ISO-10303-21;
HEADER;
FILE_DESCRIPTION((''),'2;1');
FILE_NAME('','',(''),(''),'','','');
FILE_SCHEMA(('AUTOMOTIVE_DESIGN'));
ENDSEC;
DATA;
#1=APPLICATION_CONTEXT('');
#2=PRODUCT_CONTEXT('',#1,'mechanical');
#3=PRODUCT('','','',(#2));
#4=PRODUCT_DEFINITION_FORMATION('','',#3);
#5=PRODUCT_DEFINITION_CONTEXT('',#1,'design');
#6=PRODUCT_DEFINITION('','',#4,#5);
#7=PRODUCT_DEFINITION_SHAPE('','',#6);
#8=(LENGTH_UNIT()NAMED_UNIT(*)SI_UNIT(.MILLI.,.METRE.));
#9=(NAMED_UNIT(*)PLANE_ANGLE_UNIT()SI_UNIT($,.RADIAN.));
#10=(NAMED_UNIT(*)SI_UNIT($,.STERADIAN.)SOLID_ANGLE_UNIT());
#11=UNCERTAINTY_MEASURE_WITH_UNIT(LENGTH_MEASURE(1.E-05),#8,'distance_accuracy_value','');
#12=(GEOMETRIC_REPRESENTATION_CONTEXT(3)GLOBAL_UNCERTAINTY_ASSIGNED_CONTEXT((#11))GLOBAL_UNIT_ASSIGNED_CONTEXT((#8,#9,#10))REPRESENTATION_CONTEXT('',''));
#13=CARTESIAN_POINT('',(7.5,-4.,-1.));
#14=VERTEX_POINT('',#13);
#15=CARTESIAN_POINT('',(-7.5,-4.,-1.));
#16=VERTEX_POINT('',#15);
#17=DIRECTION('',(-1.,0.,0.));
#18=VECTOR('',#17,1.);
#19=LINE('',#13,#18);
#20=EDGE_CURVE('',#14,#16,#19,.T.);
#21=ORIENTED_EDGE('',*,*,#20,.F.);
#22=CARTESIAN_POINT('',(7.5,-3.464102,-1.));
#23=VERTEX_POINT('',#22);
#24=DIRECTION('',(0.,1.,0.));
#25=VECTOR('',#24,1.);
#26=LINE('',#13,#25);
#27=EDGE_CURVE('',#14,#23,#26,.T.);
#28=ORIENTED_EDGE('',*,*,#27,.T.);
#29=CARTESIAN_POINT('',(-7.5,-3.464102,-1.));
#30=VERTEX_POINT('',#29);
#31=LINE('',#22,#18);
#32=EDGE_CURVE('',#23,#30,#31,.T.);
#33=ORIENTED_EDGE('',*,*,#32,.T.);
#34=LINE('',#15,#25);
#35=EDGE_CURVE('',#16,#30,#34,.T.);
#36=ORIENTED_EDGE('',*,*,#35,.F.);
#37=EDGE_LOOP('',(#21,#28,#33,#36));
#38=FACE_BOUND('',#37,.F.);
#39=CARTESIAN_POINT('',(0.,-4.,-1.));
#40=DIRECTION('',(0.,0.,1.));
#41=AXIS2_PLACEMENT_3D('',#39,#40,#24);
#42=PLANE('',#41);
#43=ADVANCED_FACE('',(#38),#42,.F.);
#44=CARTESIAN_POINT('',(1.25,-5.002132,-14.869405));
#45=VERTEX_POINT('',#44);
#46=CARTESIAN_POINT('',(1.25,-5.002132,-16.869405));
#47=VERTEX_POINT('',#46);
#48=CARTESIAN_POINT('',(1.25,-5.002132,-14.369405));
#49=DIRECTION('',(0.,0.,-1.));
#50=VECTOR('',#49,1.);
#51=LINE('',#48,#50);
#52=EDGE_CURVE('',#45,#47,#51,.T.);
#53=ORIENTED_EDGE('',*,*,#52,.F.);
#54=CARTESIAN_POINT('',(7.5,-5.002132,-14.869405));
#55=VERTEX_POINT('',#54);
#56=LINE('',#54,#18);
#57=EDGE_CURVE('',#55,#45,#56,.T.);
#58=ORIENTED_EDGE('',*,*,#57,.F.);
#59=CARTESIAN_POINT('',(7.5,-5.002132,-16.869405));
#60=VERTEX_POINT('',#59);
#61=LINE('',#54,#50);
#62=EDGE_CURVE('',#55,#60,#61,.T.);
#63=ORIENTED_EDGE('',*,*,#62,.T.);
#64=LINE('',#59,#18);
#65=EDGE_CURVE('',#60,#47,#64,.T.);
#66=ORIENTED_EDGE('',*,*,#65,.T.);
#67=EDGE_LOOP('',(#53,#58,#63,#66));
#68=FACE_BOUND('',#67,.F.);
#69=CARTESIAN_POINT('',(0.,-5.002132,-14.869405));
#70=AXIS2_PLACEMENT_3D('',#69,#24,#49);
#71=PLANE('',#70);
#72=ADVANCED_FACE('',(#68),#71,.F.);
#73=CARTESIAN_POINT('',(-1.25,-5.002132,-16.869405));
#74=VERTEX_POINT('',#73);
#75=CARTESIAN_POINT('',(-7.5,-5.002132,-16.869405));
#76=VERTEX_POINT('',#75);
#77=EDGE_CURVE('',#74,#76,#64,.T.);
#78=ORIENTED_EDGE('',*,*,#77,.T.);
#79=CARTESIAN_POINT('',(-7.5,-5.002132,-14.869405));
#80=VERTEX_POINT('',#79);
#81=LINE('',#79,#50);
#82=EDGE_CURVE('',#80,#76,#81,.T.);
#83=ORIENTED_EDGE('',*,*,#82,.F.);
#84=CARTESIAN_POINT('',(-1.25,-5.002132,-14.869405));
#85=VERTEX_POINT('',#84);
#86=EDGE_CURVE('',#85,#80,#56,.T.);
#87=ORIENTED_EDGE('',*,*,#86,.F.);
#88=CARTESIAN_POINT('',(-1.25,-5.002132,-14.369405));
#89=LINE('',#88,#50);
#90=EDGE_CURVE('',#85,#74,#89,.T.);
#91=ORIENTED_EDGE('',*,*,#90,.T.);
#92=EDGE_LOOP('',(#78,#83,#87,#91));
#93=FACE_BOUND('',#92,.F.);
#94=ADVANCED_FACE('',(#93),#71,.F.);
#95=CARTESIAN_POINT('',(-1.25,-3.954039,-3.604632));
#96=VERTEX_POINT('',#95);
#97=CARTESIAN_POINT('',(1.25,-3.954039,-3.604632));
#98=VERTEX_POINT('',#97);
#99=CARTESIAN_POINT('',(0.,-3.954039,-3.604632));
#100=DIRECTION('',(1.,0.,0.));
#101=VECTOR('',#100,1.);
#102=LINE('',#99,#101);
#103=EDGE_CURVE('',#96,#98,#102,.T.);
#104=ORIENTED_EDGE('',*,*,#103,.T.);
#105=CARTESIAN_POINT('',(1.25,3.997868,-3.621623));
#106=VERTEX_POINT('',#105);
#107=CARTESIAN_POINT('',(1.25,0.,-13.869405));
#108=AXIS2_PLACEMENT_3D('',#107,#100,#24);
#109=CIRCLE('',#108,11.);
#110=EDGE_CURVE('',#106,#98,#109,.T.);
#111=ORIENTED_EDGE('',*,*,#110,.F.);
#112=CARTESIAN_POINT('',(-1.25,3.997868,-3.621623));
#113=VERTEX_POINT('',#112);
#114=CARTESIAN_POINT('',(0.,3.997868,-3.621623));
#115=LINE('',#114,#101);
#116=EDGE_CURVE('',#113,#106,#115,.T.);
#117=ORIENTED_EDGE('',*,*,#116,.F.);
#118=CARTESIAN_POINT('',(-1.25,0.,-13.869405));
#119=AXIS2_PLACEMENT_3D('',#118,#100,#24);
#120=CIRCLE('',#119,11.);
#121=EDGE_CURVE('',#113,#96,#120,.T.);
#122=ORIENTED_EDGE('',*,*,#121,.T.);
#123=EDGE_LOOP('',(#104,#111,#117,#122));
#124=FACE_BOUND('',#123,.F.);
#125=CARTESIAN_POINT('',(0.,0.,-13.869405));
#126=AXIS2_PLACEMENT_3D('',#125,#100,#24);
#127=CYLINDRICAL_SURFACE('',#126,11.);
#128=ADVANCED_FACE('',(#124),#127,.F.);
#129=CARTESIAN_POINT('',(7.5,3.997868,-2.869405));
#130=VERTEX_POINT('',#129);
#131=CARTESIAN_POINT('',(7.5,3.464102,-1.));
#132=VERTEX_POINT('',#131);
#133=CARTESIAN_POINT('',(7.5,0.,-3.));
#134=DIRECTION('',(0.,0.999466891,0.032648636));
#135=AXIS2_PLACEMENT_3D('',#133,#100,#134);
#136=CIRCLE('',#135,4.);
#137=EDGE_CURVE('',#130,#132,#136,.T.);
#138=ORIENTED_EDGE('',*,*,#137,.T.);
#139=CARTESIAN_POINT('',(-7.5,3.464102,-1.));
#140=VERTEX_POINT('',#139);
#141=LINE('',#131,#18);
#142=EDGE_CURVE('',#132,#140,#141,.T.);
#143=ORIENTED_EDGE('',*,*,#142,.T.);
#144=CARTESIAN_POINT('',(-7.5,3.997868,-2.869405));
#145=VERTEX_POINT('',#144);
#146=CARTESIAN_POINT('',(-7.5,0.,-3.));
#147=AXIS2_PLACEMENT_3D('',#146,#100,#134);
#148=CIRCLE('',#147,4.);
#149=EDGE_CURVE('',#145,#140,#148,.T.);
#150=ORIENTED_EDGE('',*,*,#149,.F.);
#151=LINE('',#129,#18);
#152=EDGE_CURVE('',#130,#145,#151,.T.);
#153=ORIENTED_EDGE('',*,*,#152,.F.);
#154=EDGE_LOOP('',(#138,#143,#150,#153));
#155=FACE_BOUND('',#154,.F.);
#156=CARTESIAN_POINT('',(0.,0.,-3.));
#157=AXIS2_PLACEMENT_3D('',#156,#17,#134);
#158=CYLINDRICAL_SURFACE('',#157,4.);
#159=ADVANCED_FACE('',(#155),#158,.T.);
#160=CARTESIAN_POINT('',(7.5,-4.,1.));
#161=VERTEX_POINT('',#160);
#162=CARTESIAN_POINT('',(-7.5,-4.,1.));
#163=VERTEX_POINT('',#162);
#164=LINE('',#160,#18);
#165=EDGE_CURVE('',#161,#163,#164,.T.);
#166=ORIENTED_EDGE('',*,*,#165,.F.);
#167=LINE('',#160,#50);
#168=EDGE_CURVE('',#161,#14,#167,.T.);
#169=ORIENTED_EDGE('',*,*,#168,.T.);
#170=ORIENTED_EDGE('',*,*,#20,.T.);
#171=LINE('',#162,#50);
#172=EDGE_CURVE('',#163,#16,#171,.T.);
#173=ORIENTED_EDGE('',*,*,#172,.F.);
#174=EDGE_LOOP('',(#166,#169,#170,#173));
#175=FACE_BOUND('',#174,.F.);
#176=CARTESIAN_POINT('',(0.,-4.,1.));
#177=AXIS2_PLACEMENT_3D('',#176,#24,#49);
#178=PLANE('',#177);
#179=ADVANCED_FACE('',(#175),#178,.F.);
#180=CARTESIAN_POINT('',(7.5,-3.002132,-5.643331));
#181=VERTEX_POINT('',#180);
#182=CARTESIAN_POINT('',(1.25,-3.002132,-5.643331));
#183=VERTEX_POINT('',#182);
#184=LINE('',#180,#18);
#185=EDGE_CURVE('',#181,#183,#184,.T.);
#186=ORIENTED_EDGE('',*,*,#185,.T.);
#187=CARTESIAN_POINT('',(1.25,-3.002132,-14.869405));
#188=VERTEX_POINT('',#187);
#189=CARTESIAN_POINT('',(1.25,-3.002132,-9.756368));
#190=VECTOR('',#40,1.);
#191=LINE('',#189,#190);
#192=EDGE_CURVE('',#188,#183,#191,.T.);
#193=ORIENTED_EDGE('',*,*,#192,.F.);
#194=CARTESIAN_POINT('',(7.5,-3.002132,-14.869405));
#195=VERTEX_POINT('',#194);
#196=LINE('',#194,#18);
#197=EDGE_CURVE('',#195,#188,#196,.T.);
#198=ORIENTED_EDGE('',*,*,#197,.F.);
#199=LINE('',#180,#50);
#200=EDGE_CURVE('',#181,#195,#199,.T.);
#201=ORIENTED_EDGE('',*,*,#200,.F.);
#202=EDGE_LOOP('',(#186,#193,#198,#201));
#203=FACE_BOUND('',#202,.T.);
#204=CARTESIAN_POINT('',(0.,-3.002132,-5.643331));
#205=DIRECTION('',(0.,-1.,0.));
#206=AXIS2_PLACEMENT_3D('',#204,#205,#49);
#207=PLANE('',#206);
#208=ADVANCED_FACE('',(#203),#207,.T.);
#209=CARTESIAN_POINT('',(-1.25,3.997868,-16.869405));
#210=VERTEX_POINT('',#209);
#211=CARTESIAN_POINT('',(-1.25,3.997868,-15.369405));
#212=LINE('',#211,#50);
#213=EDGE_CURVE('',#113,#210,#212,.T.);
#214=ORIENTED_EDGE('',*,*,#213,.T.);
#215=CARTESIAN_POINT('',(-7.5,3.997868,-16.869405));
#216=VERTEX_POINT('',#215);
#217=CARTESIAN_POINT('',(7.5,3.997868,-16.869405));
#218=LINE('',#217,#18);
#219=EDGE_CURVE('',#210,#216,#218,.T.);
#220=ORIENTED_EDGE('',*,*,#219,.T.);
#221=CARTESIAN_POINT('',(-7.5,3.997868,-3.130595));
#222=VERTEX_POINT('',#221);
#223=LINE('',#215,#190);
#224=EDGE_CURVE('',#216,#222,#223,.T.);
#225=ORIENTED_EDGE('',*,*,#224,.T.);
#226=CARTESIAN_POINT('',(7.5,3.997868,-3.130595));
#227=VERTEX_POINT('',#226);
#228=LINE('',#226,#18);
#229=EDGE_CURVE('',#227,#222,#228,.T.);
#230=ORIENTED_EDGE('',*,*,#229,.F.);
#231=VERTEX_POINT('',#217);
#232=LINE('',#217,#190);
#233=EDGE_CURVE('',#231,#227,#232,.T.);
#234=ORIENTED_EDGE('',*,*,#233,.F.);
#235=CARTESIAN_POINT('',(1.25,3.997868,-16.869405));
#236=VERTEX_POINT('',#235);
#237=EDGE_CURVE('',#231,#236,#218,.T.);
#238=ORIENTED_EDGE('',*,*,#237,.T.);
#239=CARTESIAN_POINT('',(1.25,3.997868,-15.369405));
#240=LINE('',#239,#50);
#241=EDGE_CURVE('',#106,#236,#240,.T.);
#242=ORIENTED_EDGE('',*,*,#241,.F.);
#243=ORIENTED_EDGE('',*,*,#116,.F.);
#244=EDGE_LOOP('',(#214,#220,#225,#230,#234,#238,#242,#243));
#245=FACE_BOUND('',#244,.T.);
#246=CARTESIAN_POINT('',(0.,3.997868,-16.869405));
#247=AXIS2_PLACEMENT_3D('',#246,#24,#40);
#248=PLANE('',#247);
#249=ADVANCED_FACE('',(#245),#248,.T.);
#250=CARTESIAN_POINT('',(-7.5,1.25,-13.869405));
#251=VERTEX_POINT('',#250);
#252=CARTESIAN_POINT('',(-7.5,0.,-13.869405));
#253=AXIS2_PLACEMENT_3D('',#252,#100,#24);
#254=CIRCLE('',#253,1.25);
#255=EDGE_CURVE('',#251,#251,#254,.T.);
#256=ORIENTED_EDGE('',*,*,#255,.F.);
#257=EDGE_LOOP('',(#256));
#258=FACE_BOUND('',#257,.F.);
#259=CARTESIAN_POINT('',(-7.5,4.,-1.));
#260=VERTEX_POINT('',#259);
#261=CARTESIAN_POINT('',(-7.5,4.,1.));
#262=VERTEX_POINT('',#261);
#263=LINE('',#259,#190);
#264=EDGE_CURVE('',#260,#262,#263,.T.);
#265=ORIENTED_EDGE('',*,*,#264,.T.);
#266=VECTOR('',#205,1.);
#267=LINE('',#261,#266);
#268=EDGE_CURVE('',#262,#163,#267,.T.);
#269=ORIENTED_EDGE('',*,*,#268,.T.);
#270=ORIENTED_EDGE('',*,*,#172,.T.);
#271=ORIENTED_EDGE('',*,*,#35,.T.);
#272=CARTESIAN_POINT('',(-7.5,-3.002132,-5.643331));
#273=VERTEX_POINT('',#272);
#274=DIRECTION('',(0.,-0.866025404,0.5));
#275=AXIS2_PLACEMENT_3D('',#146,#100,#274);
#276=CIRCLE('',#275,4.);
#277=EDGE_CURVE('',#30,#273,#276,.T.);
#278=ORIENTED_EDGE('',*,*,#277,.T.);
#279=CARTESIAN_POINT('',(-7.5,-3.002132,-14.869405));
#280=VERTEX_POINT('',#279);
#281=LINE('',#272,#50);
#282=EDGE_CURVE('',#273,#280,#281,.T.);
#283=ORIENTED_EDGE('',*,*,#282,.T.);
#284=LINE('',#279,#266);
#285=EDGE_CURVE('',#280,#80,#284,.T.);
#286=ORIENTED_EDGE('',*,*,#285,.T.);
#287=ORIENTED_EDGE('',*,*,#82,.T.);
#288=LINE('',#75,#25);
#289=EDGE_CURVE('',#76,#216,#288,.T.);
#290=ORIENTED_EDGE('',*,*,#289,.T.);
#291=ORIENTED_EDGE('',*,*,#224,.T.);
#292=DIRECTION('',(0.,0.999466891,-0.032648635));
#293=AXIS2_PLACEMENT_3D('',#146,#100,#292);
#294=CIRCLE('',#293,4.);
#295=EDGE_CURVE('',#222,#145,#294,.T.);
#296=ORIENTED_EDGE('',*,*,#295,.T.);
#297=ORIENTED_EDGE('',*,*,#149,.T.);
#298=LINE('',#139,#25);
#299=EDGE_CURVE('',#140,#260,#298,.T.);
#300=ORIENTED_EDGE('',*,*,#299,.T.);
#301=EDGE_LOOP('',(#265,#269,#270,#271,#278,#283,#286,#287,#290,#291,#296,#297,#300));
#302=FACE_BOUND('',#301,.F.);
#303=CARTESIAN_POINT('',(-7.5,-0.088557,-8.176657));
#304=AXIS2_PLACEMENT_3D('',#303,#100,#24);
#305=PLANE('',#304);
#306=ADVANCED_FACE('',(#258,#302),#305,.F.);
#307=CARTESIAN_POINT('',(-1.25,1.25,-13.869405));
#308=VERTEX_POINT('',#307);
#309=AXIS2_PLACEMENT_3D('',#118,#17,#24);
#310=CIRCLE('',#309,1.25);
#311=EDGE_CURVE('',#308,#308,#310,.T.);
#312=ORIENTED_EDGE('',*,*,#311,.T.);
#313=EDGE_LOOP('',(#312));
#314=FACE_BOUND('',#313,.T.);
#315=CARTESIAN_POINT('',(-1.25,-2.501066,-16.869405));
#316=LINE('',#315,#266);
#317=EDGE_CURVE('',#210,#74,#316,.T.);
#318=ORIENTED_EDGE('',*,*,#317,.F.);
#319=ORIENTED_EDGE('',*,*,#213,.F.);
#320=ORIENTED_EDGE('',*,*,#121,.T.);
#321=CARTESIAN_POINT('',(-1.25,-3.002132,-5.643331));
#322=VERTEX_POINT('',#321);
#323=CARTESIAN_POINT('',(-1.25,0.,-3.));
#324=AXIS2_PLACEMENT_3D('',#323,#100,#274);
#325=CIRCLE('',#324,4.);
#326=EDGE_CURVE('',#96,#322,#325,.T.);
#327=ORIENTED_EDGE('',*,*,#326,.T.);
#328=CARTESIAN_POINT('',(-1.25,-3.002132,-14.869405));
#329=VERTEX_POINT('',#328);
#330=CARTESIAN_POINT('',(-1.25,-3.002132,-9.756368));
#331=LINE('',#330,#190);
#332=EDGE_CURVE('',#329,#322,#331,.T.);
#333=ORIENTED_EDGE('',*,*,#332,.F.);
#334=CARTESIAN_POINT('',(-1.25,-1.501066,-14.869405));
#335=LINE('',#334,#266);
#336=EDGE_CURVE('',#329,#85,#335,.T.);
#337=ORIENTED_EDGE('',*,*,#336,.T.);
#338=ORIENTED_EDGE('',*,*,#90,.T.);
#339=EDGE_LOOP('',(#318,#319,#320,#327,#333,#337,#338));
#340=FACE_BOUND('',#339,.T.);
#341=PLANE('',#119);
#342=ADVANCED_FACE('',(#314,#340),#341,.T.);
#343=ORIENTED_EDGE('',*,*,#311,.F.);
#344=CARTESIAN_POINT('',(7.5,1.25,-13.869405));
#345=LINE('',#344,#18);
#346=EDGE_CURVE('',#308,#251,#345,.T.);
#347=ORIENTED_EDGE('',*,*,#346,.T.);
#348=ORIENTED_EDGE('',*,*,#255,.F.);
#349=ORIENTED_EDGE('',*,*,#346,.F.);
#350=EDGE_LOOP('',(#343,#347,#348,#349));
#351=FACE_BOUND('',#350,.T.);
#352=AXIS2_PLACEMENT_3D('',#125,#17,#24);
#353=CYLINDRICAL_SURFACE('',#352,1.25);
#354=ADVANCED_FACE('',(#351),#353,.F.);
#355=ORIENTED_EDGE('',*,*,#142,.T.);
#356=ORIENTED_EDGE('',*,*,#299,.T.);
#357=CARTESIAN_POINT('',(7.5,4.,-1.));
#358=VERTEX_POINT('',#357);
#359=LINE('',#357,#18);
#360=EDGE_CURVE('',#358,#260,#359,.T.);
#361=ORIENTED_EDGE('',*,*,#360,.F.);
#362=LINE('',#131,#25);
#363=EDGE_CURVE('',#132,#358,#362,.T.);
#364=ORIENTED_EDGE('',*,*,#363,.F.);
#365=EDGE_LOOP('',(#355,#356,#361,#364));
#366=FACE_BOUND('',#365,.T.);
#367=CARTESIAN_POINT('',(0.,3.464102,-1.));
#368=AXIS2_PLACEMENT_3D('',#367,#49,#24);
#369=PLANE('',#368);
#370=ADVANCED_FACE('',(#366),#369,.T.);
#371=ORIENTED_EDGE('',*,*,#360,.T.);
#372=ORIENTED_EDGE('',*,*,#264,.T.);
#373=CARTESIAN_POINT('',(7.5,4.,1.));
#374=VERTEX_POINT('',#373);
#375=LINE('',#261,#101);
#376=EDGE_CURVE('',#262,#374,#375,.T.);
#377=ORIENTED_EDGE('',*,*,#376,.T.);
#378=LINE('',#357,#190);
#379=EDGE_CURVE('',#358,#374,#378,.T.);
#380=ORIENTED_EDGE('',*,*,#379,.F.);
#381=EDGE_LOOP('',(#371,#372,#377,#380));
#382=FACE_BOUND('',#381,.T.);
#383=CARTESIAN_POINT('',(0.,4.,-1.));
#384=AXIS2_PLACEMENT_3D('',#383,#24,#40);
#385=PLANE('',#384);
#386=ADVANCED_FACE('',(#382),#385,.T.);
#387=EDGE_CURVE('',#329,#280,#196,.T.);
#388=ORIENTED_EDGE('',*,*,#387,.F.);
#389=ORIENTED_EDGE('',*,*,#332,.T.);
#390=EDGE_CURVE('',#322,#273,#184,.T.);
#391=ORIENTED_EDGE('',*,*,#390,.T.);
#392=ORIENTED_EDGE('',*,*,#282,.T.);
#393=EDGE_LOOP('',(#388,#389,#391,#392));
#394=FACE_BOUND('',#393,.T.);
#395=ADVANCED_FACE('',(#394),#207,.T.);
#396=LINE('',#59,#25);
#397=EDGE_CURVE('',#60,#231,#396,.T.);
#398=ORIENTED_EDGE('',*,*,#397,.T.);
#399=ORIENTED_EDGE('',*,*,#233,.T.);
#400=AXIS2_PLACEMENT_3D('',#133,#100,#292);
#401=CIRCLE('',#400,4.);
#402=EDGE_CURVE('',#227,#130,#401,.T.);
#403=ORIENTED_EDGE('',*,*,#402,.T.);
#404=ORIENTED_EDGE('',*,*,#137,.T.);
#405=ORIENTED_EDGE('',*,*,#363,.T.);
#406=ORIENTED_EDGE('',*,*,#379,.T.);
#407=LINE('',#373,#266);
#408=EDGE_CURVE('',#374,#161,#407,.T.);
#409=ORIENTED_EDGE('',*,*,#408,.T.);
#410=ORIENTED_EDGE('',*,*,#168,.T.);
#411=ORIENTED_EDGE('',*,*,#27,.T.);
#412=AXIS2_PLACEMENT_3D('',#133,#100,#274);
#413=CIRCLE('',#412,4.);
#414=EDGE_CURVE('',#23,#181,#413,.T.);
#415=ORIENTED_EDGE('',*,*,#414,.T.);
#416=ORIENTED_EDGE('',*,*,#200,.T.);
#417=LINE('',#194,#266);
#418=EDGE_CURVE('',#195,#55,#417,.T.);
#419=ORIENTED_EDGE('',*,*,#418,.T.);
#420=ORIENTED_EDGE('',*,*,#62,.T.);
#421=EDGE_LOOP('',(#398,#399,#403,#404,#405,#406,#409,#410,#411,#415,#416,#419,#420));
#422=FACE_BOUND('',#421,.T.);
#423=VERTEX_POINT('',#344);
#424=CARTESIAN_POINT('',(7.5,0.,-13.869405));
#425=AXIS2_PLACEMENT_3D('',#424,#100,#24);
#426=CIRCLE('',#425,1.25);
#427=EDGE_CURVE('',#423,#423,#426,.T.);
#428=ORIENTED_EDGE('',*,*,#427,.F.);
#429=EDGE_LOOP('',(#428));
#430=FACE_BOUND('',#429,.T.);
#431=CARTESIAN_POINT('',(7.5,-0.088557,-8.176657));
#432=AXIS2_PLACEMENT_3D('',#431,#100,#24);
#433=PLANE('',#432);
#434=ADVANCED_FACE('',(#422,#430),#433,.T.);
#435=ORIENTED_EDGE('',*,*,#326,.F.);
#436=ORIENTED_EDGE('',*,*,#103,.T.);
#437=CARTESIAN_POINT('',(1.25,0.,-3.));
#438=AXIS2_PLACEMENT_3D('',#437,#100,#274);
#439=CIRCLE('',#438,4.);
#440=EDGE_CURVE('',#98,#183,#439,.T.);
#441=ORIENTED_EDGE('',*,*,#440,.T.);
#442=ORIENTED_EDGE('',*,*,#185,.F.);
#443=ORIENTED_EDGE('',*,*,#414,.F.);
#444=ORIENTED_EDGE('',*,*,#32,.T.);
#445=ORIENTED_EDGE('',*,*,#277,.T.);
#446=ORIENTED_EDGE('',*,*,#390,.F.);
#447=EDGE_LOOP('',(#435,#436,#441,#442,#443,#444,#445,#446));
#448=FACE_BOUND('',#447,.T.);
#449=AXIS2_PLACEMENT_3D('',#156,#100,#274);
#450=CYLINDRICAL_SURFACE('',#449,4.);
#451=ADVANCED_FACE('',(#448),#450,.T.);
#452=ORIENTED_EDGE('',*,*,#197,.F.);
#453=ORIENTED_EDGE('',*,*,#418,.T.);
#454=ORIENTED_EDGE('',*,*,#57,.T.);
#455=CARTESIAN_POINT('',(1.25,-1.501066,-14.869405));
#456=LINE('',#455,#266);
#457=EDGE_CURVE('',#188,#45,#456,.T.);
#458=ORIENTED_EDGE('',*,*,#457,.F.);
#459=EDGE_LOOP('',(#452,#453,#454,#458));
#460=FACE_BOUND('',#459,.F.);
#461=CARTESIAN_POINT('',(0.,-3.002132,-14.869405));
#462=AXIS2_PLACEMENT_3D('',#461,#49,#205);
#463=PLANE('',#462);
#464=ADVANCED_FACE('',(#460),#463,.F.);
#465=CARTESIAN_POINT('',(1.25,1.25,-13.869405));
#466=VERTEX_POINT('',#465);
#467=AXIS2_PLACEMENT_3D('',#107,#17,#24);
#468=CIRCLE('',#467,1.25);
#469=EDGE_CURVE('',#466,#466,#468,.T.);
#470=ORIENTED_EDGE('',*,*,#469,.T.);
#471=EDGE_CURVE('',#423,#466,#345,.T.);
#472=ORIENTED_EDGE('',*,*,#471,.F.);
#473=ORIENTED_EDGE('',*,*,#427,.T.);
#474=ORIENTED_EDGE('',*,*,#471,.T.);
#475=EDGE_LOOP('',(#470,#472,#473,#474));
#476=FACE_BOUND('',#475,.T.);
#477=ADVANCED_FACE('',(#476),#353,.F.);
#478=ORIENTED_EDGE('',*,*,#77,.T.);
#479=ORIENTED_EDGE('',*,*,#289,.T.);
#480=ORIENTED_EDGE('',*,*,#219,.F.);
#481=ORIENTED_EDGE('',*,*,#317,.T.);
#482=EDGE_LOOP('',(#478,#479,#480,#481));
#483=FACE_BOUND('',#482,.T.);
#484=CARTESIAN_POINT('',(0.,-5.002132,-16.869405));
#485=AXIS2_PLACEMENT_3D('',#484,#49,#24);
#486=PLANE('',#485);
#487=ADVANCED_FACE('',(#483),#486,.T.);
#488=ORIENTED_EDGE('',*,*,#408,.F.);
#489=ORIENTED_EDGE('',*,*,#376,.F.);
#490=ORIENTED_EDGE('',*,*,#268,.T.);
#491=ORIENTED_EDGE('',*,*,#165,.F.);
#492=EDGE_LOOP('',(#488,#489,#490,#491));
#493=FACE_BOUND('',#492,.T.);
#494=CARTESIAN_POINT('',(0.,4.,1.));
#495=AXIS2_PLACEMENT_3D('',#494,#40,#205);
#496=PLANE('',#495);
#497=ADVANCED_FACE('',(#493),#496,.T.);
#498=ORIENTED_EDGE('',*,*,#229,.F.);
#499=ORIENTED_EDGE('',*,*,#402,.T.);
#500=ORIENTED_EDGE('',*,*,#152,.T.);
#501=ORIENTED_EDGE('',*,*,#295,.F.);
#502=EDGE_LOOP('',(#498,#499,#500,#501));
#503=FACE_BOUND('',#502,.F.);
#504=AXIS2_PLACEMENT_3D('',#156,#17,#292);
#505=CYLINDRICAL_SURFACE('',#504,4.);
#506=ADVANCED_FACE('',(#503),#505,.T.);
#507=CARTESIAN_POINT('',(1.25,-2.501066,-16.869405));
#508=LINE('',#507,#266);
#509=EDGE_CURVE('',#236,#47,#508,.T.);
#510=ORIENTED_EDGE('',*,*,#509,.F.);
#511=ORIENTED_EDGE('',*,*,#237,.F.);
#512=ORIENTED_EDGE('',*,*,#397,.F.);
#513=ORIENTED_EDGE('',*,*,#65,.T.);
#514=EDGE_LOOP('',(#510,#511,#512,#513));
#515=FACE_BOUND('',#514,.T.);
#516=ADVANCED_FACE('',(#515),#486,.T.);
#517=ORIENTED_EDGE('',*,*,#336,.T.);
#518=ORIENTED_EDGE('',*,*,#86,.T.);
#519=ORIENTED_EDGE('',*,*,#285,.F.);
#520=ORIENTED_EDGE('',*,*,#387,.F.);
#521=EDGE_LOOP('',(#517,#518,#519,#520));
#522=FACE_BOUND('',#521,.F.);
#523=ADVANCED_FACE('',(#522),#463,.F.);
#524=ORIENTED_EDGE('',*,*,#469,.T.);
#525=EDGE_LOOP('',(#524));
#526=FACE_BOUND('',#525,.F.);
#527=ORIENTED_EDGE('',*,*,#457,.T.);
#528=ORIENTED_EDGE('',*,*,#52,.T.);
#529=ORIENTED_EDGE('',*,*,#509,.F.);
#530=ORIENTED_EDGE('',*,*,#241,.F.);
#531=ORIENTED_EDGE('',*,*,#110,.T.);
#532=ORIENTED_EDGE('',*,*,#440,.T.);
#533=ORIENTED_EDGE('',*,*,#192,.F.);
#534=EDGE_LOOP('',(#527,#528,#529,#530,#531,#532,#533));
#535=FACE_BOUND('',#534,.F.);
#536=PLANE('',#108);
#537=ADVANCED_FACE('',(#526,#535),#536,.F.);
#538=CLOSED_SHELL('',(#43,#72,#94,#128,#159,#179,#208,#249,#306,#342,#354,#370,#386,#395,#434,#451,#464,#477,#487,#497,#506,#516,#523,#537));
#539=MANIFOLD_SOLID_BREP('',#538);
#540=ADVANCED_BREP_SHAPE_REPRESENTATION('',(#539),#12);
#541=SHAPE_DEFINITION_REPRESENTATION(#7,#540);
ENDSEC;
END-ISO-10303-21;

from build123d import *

# Parameters (mm, degrees)
F0_R     = 1.25
F1_DEPTH = 7.5
F2_R     = 11
F3_DEPTH = 1.25


# Not quite as in the source:
# - a feature of the source that left no trace in its solid (it failed there, or was rolled back) is left out


with BuildPart() as f1:
    # F0 (on Right) → F1 (new body, symmetric)
    with BuildSketch(Plane.YZ):
        with BuildLine():
            Line((4, -1), (4, 1))
            Line((4, 1), (-4, 1))
            Line((-4, 1), (-4, -1))
            Line((-4, -1), (-3.4641016151, -1))
            ThreePointArc((-3.4641016151, -1), (-3.9803488917, -3.39600846), (-3.0021324352, -5.6433313908))
            Line((-3.0021324352, -5.6433313908), (-3.0021324352, -14.8694054575))
            Line((-3.0021324352, -14.8694054575), (-5.0021324352, -14.8694054575))
            Line((-5.0021324352, -14.8694054575), (-5.0021324352, -16.8694054575))
            Line((-5.0021324352, -16.8694054575), (3.9978675648, -16.8694054575))
            Line((3.9978675648, -16.8694054575), (3.9978675648, -14.8694054575))
            Line((3.9978675648, -14.8694054575), (3.9978675648, -3.1305945425))
            Line((3.9978675648, -3.1305945425), (3.9978675648, -2.8694054575))
            ThreePointArc((3.9978675648, -2.8694054575), (3.846285897, -1.901781079), (3.4641016151, -1))
            Line((3.4641016151, -1), (4, -1))
        make_face()
        with Locations((0, -13.8694054575)):
            Circle(F0_R, mode=Mode.SUBTRACT)
        with BuildLine():
            ThreePointArc((3.9978675648, -3.1305945425), (4, -3), (3.9978675648, -2.8694054575))
            Line((3.9978675648, -2.8694054575), (3.9978675648, -3.1305945425))
        make_face()
    extrude(amount=F1_DEPTH, both=True)

    # F2 (on Right) → F3 (cut, symmetric)
    with BuildSketch(Plane.YZ):
        with Locations((0, -13.8694054575)):
            Circle(F2_R)
    extrude(amount=F3_DEPTH, both=True, mode=Mode.SUBTRACT)


solid = f1.part
